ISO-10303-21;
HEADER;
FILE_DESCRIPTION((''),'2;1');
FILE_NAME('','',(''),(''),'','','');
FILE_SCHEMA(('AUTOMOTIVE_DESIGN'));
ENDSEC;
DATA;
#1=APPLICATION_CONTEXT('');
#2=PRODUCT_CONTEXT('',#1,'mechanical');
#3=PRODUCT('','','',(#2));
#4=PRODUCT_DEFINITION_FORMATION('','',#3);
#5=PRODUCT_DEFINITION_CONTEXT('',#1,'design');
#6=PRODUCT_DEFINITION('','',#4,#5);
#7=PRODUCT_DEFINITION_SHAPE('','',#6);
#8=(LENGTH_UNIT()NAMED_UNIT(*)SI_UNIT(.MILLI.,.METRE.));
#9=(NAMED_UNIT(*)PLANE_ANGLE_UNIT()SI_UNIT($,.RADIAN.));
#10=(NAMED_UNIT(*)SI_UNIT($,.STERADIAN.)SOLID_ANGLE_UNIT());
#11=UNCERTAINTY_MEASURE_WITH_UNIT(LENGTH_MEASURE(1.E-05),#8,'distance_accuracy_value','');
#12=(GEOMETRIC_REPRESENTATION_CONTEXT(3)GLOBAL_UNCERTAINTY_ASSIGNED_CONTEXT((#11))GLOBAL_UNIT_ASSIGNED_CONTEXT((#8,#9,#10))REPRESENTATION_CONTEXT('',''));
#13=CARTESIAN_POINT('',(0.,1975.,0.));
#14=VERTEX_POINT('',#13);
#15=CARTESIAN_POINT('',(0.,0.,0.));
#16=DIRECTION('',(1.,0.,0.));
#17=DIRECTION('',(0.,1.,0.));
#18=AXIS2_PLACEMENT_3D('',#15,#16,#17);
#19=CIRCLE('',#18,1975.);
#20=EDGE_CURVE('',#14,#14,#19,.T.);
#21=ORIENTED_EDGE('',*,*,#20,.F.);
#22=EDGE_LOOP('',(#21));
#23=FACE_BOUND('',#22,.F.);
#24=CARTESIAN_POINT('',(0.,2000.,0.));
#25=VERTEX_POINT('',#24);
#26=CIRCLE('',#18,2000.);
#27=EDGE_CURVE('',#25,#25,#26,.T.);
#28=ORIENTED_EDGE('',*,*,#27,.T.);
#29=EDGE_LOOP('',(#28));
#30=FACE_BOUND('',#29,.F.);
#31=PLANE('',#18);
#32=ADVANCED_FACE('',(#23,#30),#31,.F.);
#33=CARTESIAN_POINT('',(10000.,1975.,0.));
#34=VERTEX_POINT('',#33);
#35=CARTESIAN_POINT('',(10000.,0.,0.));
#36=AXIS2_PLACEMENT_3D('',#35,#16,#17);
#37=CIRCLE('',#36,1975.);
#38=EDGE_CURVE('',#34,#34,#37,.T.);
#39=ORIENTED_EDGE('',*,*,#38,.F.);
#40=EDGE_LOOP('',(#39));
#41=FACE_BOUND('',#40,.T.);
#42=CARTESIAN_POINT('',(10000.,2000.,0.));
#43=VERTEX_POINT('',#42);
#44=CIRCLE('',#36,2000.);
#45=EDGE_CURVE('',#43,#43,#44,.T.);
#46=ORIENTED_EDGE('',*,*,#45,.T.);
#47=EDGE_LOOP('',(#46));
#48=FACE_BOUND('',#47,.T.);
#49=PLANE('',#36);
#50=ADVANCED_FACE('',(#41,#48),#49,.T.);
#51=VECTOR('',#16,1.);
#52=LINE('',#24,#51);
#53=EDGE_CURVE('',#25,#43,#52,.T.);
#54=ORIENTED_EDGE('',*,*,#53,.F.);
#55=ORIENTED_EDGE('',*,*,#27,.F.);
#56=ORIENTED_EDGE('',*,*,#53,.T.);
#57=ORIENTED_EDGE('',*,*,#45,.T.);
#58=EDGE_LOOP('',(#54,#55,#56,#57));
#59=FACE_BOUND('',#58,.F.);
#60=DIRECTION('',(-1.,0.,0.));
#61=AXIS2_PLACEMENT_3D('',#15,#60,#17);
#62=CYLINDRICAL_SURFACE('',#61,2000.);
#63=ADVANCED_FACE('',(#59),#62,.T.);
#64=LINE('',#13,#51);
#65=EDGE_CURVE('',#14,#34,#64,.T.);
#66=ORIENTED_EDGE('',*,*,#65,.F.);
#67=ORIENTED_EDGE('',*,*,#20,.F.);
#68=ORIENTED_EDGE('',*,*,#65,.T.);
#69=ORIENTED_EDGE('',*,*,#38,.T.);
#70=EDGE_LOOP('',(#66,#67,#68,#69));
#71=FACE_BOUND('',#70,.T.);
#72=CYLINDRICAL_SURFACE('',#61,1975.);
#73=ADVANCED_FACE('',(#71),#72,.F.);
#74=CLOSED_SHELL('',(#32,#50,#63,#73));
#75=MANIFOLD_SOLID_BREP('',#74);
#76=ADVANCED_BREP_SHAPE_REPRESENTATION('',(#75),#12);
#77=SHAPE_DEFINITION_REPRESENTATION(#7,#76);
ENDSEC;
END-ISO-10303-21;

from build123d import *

# Parameters (mm, degrees)
F0_R     = 2000
F0_R_2   = 1975
F1_DEPTH = 10000


# Not quite as in the source:
# - a feature of the source that left no trace in its solid (it failed there, or was rolled back) is left out


with BuildPart() as f1:
    # F0 (on Right) → F1 (new body)
    with BuildSketch(Plane.YZ):
        Circle(F0_R)
        Circle(F0_R_2, mode=Mode.SUBTRACT)
    extrude(amount=F1_DEPTH)


solid = f1.part
